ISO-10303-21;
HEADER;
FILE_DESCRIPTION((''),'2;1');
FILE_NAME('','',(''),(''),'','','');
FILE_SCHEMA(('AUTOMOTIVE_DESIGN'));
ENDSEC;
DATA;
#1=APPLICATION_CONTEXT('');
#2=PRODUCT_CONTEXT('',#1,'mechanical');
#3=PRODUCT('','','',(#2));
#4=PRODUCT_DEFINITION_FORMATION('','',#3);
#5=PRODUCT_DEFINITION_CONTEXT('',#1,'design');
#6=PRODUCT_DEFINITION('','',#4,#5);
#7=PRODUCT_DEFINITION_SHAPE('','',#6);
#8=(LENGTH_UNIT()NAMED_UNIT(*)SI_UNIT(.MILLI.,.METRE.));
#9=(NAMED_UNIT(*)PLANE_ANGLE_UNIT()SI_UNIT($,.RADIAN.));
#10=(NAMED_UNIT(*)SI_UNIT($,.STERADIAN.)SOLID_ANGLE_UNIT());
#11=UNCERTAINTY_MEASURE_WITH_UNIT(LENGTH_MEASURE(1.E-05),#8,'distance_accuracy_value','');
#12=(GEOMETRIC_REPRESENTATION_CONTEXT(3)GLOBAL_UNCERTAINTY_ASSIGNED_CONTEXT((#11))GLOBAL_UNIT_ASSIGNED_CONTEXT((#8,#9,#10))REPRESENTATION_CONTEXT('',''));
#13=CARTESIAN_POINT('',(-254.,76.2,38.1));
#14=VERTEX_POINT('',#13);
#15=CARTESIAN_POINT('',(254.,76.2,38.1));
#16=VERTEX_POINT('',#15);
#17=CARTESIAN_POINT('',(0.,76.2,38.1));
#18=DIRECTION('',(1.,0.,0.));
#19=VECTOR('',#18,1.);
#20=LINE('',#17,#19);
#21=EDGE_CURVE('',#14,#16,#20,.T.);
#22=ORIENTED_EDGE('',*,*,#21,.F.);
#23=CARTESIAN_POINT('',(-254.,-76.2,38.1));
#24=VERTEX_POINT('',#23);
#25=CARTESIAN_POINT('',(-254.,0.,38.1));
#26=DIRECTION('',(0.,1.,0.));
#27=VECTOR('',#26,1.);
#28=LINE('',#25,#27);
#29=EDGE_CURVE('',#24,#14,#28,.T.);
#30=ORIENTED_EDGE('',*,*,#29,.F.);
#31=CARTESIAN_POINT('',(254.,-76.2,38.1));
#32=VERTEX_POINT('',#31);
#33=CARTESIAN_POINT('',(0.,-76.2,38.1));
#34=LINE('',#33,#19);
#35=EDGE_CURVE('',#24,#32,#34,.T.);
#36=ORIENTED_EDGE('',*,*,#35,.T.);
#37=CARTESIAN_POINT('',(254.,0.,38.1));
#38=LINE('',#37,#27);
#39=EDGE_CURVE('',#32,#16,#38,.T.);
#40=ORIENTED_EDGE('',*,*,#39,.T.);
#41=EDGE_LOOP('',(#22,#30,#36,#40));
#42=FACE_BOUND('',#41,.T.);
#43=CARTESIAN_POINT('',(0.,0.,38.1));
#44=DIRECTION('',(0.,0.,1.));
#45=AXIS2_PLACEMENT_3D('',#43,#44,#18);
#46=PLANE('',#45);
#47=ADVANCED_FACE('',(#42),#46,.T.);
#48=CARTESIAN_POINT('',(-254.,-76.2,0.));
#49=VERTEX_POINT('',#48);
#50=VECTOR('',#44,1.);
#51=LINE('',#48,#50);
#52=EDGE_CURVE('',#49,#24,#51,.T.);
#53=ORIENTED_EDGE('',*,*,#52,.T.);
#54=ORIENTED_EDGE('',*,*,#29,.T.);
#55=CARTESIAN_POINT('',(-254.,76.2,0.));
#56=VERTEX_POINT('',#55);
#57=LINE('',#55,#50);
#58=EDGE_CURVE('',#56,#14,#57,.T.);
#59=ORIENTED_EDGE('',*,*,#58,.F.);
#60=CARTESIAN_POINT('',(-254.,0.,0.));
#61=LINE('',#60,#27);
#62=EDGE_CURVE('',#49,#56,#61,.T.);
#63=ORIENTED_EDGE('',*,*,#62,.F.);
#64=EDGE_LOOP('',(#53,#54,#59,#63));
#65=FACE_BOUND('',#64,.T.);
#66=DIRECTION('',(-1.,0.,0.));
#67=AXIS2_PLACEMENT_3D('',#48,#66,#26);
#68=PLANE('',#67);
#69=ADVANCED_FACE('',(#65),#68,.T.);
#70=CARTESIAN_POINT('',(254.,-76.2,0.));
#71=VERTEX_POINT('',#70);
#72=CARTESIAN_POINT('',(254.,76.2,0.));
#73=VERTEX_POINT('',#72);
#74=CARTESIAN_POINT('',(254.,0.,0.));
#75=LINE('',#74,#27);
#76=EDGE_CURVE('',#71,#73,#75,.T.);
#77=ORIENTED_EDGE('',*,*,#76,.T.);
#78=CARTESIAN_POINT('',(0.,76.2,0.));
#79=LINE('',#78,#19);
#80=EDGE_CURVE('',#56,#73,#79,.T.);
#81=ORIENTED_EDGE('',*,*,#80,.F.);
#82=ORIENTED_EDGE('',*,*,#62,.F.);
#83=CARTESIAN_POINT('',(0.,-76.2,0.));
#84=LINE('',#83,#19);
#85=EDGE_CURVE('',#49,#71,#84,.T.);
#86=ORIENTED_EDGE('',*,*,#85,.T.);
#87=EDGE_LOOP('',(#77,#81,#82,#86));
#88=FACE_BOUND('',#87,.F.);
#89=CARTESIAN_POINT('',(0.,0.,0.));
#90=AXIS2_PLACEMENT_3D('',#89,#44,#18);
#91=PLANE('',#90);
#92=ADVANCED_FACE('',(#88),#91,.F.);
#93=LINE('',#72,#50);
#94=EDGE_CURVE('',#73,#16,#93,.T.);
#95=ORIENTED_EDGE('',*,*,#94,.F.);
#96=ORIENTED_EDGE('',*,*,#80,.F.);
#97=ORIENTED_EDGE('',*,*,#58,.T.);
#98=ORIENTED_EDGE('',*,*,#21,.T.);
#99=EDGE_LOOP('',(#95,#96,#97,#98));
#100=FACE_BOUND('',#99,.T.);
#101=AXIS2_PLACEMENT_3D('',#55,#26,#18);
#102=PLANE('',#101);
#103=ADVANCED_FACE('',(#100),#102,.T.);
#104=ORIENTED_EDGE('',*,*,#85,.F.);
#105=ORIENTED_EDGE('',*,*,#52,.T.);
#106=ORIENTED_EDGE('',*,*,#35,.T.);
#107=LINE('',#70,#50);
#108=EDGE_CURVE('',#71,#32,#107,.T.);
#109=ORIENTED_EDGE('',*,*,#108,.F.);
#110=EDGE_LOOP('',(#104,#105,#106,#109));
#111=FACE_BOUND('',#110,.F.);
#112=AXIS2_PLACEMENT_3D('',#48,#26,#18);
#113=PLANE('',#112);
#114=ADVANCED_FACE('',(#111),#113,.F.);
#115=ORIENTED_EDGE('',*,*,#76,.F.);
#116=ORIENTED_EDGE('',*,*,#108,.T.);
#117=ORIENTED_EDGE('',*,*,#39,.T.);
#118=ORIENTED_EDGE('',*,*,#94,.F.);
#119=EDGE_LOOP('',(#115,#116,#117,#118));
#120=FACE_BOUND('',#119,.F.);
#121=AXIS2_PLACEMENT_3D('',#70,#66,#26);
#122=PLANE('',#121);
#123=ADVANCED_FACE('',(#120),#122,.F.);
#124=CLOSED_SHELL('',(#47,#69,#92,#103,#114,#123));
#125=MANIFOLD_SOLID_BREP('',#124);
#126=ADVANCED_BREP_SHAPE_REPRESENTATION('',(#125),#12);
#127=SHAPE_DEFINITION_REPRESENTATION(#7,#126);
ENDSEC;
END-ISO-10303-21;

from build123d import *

# Parameters (mm, degrees)
F0_W     = 508
F0_H     = 152.4
F1_DEPTH = 38.1


# Not quite as in the source:
# - a feature of the source that left no trace in its solid (it failed there, or was rolled back) is left out


with BuildPart() as f1:
    # F0 (on Top) → F1 (new body)
    with BuildSketch(Plane.XY):
        Rectangle(F0_W, F0_H)
    extrude(amount=F1_DEPTH)


solid = f1.part
